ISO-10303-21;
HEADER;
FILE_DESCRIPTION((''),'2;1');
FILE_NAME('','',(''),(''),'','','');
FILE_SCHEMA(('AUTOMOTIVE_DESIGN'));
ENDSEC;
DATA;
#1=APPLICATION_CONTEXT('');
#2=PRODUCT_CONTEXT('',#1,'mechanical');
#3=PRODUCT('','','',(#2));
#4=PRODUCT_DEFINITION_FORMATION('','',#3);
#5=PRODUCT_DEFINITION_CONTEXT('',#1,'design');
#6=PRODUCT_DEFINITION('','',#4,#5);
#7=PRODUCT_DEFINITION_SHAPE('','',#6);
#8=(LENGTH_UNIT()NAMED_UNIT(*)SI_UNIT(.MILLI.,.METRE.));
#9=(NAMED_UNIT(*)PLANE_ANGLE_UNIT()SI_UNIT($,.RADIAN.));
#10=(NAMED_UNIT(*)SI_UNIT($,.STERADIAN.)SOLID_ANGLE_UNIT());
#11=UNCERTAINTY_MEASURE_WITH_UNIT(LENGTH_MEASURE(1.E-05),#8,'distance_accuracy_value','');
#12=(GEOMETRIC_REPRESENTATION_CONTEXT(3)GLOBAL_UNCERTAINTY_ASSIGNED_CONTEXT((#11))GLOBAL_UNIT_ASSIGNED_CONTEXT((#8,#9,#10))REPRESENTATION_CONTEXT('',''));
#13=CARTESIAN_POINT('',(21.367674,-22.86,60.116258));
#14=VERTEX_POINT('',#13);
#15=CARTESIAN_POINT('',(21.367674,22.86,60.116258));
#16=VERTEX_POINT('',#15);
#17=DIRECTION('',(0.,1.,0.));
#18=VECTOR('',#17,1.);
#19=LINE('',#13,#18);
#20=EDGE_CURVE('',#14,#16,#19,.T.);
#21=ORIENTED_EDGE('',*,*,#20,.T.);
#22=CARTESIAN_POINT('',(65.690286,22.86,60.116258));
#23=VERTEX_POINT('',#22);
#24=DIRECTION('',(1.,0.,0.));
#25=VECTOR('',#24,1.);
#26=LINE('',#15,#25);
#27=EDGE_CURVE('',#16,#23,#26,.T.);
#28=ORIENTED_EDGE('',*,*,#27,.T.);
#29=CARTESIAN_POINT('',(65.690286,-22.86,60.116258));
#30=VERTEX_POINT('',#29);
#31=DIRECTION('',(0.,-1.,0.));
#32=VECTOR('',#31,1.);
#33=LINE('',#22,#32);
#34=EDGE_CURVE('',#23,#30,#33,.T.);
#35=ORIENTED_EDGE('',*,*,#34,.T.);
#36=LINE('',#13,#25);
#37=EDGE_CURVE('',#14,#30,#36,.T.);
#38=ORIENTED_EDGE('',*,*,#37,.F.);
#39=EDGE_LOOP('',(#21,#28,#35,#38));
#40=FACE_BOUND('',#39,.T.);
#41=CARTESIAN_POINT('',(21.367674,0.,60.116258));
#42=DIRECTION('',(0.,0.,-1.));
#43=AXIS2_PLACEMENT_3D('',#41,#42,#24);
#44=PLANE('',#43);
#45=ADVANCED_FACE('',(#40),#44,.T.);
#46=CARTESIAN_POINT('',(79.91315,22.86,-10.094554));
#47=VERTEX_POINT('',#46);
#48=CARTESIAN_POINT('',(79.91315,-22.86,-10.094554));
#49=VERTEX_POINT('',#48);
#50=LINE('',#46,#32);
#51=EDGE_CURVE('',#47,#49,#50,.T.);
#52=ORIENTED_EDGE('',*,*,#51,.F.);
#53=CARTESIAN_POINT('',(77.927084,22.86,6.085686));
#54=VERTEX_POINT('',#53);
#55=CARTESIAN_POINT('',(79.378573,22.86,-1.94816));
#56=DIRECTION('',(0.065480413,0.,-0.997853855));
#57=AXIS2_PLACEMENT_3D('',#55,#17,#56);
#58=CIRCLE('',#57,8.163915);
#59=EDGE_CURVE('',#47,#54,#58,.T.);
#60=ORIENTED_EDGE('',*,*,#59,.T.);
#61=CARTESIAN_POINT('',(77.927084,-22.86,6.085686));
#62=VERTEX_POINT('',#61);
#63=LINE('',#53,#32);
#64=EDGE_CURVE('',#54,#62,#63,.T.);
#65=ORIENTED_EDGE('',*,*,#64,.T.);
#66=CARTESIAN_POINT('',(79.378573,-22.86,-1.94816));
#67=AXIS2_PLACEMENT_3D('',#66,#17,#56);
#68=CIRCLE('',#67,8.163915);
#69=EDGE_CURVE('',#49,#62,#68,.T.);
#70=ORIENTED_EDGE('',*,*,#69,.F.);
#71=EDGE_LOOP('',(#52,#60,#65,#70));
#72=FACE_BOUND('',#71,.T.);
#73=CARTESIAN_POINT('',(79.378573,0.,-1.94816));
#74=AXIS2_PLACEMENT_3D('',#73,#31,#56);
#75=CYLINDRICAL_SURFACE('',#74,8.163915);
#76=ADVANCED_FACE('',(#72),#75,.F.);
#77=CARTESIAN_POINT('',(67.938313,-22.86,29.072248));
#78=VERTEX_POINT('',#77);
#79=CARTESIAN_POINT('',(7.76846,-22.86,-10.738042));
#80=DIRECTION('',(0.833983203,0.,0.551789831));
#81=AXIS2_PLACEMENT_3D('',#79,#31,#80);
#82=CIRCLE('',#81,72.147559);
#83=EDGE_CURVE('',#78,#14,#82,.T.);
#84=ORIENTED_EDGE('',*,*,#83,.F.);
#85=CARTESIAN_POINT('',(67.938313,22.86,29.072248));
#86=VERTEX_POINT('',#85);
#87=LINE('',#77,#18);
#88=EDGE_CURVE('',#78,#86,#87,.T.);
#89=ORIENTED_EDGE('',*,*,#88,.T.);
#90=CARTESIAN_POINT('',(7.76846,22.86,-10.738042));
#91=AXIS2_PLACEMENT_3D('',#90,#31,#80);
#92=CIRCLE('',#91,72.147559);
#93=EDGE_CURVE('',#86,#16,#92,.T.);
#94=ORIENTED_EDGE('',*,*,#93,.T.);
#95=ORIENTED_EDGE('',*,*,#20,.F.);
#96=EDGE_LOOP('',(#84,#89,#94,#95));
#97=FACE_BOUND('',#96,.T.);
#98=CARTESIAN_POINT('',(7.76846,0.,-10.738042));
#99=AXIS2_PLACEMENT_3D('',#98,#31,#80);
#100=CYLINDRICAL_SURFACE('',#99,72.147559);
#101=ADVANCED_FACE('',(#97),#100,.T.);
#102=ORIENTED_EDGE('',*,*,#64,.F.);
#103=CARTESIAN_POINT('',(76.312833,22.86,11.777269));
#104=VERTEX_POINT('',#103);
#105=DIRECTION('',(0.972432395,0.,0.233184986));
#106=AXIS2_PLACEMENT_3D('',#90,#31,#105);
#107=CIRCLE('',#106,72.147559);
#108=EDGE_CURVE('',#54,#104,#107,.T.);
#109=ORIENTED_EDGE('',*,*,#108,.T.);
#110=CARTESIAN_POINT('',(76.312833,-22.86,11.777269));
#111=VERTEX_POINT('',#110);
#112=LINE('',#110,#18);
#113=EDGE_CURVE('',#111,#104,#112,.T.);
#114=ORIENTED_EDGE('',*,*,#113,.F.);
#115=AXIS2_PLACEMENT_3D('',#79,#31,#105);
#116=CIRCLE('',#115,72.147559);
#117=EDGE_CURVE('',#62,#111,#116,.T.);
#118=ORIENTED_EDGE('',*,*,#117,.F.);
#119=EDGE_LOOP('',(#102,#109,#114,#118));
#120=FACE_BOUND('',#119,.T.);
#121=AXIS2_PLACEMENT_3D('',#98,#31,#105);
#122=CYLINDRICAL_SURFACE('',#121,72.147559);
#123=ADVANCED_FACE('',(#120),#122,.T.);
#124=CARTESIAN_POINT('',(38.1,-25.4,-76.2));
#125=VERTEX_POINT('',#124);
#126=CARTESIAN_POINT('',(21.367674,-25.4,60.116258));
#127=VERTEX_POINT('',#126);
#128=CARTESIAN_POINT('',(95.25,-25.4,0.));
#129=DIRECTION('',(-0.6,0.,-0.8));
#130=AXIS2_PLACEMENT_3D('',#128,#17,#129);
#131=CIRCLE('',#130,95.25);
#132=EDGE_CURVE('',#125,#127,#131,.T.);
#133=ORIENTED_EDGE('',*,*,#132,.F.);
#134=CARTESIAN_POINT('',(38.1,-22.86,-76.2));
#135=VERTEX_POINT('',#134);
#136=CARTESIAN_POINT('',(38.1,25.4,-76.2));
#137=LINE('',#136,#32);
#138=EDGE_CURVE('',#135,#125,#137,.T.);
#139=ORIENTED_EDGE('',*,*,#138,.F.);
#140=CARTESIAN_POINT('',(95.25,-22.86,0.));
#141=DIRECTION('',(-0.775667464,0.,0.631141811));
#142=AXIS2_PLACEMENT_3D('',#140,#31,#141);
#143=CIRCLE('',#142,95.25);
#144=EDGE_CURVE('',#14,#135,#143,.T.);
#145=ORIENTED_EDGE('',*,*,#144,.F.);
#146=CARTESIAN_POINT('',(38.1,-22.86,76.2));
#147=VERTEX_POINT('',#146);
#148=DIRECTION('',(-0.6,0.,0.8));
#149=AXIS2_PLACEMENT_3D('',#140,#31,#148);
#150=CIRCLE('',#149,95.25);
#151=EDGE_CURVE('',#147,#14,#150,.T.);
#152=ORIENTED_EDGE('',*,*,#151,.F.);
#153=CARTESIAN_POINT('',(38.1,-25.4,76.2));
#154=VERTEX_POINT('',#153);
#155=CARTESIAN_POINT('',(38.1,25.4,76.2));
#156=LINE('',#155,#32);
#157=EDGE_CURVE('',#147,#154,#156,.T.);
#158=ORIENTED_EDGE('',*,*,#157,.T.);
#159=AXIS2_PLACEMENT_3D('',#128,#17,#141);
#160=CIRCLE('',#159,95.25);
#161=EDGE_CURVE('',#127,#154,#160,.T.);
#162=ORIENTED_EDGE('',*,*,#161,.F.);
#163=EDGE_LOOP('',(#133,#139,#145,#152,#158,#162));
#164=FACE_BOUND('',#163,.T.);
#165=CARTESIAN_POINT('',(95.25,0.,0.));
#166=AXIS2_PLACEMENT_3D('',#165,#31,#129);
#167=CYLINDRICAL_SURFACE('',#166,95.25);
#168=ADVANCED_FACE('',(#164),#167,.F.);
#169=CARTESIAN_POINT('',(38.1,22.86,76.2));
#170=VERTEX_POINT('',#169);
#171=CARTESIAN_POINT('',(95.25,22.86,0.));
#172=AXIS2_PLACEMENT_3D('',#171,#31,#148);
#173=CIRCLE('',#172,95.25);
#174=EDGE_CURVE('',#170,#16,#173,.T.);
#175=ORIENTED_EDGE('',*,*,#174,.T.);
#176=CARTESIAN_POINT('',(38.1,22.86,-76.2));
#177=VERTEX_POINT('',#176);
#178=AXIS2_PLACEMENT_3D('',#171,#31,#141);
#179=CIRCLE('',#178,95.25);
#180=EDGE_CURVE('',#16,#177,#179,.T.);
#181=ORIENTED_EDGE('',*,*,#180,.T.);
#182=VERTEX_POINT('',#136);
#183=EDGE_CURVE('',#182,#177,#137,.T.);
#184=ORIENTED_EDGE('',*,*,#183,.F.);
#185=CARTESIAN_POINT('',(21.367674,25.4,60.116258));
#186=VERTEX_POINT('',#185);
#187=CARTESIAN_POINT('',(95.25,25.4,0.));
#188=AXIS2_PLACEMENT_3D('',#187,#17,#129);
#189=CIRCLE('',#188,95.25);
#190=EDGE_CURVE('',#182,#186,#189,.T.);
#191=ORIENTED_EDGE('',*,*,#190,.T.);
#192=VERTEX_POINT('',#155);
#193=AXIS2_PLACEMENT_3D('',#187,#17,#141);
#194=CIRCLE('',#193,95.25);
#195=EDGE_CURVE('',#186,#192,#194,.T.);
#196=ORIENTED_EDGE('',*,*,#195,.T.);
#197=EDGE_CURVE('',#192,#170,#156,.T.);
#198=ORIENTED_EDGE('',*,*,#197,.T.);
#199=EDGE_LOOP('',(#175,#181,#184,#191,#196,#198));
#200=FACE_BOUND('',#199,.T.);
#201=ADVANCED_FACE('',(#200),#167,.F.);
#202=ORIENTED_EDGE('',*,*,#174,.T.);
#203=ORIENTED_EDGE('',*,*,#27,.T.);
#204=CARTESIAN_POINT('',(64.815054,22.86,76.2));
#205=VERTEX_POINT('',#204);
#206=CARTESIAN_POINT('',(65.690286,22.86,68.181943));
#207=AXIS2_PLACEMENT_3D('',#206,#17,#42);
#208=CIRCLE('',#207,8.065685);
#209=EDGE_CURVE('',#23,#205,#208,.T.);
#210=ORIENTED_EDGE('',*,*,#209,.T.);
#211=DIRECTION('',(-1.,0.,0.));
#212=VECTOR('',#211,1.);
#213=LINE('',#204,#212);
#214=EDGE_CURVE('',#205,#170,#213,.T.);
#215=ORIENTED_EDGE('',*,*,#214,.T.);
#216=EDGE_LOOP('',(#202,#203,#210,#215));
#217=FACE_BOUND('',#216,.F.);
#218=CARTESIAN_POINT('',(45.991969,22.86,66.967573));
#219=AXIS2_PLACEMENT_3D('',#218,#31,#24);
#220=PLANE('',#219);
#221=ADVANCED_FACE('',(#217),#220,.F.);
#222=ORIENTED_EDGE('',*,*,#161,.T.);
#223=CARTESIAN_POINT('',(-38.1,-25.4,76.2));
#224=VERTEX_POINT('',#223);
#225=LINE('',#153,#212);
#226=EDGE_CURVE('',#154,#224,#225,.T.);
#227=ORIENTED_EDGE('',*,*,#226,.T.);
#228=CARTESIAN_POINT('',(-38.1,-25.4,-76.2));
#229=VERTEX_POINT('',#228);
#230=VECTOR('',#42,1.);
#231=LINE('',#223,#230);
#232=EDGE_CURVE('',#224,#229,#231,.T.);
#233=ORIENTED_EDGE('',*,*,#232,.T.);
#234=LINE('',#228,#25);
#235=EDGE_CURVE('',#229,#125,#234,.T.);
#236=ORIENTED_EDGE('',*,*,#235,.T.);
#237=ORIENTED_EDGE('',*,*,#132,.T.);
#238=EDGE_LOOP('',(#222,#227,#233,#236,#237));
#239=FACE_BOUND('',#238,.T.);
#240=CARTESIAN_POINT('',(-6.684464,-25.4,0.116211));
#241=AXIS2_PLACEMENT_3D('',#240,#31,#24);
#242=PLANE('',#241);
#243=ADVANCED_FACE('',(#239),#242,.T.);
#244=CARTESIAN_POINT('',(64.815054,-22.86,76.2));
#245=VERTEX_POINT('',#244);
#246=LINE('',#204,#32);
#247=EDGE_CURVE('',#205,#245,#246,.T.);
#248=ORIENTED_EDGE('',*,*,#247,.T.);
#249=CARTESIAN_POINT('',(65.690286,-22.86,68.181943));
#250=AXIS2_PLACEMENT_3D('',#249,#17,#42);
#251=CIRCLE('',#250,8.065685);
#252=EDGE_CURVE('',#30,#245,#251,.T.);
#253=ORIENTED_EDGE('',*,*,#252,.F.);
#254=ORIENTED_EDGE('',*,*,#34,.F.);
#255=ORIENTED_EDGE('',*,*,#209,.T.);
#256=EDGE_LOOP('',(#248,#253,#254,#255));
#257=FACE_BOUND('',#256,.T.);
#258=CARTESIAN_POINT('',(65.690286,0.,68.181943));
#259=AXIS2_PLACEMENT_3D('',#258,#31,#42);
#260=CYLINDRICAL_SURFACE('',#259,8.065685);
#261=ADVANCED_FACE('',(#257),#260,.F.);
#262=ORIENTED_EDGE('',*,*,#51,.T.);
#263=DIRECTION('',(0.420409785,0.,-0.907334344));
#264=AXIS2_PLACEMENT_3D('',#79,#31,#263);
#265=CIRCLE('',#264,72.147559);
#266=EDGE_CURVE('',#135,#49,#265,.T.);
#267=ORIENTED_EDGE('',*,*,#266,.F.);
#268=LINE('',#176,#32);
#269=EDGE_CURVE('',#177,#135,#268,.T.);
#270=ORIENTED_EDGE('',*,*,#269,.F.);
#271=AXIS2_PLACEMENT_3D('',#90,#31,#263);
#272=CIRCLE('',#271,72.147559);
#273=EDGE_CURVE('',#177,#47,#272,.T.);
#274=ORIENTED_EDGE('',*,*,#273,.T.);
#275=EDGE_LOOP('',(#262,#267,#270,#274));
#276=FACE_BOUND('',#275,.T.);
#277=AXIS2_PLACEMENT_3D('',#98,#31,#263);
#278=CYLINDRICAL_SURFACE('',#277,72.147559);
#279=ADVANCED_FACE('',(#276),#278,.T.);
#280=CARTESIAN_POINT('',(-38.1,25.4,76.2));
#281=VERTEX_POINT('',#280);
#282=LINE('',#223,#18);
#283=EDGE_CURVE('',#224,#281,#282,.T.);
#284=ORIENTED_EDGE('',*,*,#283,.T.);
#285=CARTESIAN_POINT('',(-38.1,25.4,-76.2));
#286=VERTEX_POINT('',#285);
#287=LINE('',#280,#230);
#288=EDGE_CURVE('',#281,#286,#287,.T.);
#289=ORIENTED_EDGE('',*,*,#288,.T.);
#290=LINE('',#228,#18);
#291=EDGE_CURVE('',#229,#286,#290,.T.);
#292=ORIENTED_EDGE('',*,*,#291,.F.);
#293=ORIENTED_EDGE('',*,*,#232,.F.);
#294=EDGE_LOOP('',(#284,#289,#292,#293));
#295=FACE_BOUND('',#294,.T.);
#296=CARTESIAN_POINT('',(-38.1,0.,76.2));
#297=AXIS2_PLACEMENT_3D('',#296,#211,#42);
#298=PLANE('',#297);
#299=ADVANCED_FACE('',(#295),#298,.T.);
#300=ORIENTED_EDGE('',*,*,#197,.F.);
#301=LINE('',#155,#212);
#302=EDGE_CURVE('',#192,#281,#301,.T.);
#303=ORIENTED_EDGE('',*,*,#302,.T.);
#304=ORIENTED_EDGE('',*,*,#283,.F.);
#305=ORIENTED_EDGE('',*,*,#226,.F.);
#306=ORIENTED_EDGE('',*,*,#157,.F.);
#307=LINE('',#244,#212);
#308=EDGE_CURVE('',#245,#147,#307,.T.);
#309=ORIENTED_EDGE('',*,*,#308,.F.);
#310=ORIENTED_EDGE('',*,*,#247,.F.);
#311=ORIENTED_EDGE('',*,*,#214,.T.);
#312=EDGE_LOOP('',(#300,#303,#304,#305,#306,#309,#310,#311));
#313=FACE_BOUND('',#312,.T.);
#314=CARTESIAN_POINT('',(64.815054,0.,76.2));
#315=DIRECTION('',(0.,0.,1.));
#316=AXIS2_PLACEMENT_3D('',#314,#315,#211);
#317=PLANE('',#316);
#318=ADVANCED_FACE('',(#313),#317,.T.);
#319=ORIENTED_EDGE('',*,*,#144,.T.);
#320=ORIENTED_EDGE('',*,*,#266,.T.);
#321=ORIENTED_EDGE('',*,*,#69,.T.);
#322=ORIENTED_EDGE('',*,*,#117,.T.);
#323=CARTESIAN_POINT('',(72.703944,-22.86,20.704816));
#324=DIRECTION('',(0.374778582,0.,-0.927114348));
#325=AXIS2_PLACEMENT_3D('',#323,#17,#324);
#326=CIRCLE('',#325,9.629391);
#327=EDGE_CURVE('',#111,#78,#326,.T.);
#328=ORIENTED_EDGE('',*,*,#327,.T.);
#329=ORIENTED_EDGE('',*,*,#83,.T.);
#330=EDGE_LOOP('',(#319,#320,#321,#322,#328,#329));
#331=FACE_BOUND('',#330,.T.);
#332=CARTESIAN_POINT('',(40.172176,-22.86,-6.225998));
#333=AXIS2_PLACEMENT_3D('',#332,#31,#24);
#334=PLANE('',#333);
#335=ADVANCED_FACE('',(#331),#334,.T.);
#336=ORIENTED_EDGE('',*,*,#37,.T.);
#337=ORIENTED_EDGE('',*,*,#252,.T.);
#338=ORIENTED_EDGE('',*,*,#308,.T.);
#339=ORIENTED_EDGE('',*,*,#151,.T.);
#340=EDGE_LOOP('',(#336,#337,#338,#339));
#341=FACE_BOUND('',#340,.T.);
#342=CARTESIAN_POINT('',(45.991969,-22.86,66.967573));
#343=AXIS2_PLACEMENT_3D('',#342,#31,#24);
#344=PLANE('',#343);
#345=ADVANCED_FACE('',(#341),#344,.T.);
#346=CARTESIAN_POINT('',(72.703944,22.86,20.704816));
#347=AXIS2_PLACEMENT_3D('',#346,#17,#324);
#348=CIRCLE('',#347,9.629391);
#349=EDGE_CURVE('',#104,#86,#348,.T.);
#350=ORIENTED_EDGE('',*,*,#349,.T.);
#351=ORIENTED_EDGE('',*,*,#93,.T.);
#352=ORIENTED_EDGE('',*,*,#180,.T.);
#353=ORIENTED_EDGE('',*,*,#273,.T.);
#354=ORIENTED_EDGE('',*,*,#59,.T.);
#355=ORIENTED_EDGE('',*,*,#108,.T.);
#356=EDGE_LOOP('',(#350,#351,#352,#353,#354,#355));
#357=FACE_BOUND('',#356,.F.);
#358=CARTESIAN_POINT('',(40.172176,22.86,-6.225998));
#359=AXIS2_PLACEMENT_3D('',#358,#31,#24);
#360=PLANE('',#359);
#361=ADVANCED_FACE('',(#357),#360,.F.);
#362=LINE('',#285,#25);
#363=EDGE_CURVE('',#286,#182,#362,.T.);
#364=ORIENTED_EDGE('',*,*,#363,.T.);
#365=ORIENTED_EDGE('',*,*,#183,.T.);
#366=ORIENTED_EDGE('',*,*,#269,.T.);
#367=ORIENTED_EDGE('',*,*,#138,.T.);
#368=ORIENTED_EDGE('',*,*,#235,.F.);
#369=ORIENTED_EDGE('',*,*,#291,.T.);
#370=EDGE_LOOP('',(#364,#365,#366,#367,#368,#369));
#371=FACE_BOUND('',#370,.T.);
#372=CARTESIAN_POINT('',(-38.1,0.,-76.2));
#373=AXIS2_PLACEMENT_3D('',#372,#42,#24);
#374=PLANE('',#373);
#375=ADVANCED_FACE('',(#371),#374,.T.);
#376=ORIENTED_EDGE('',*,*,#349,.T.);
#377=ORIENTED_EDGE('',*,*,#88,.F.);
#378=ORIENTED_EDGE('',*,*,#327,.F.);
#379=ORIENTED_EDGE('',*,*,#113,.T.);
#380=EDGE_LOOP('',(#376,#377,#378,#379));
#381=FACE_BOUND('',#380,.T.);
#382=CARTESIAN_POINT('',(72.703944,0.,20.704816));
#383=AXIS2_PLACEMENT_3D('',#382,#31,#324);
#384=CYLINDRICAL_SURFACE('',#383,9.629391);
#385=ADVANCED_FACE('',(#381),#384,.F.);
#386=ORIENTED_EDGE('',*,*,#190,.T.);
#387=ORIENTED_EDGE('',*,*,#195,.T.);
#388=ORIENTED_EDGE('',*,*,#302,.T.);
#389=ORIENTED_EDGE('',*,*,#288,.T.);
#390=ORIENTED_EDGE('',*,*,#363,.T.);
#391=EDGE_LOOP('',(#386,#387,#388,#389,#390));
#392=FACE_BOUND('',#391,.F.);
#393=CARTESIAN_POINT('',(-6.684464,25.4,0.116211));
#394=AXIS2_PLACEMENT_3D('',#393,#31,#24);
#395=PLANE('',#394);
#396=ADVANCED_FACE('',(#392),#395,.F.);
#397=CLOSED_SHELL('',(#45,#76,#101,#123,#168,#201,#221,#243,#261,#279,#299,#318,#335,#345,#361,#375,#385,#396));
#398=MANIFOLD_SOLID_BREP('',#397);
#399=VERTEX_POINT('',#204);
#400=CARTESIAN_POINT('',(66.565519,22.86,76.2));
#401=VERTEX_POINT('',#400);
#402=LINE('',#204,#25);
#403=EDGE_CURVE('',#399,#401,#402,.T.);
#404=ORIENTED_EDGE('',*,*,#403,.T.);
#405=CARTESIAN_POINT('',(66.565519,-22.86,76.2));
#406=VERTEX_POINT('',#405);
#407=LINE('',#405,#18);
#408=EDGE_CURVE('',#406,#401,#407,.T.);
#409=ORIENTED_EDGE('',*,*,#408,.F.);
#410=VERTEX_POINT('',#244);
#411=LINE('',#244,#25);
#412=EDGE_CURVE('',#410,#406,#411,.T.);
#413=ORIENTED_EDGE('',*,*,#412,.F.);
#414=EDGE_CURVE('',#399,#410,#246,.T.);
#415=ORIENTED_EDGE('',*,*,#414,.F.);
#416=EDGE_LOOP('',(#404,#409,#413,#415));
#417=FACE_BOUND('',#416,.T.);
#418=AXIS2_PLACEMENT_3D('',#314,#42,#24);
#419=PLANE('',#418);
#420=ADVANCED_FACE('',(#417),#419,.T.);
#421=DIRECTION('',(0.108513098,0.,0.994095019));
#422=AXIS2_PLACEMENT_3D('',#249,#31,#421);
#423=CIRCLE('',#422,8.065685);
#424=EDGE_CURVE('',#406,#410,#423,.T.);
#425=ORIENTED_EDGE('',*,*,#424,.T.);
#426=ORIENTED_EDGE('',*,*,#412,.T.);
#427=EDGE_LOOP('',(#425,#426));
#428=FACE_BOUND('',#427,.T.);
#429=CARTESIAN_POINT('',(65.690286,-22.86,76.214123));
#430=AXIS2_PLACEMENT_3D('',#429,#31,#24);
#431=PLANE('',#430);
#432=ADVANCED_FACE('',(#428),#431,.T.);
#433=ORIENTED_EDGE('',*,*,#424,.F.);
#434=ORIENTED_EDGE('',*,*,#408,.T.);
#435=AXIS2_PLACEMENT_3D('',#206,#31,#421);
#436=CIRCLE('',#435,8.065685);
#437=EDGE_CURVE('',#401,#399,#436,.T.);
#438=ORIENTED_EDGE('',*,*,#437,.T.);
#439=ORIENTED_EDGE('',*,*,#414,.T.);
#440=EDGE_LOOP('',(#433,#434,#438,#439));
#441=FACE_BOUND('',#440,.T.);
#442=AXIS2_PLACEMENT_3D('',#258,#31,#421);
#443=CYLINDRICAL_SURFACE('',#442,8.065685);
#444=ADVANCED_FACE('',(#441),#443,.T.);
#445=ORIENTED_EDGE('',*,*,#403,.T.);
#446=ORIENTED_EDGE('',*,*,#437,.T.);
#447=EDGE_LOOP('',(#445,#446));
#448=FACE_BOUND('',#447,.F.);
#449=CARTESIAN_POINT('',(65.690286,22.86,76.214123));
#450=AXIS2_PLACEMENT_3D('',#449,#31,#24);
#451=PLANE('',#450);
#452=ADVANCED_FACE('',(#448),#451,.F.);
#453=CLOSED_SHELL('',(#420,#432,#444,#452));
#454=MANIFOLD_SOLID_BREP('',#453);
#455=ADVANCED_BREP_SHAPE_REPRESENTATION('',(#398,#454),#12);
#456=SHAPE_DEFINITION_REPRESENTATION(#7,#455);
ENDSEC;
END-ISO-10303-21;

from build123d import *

# Parameters (mm, degrees)
F1_DEPTH = 25.4
F2_DEPTH = 22.86


with BuildPart() as f1:
    # F0 (on Front) → F1 (new body, symmetric)
    with BuildSketch(Plane.XZ):
        with BuildLine():
            Line((-38.1, -76.2), (38.1, -76.2))
            ThreePointArc((38.1, -76.2), (0.709542394, -11.6044980782), (21.3676740894, 60.1162575185))
            ThreePointArc((21.3676740894, 60.1162575185), (29.2421269738, 68.6696672379), (38.1, 76.2))
            Line((38.1, 76.2), (17.5172466843, 76.2))
            Line((17.5172466843, 76.2), (-38.1, 76.2))
            Line((-38.1, 76.2), (-38.1, -76.2))
        make_face()
    extrude(amount=F1_DEPTH, both=True)



with BuildPart() as f2:
    # F0 (on Front) → F2 (new body, symmetric)
    with BuildSketch(Plane.XZ):
        with BuildLine():
            ThreePointArc((66.565518939, 76.2), (65.6902864575, 76.2476277146), (64.8150539761, 76.2))
            Line((64.8150539761, 76.2), (66.565518939, 76.2))
        make_face()
    extrude(amount=F2_DEPTH, both=True)


with BuildPart() as f1_1:
    add(f1.part)

    add(f2.part)  # F2#2 merges F2
    # F0 (on Front) → F2, piece 2 (join, symmetric)
    with BuildSketch(Plane.XZ):
        with BuildLine():
            ThreePointArc((38.1, 76.2), (29.2421269738, 68.6696672379), (21.3676740894, 60.1162575185))
            Line((21.3676740894, 60.1162575185), (65.6902864575, 60.1162575185))
            ThreePointArc((65.6902864575, 60.1162575185), (57.6365170899, 67.7436789129), (64.8150539761, 76.2))
            Line((64.8150539761, 76.2), (38.1, 76.2))
        make_face()
        with BuildLine():
            ThreePointArc((21.3676740894, 60.1162575185), (0.709542394, -11.6044980782), (38.1, -76.2))
            ThreePointArc((38.1, -76.2), (68.7424455832, -49.3054294639), (79.9131497153, -10.0945538702))
            ThreePointArc((79.9131497153, -10.0945538702), (71.275473587, -2.9427861122), (77.9270839804, 6.0856860805))
            ThreePointArc((77.9270839804, 6.0856860805), (77.1783216459, 8.9480305918), (76.3128333068, 11.7772691943))
            ThreePointArc((76.3128333068, 11.7772691943), (64.037134436, 16.508200152), (67.9383126947, 29.0722480144))
            ThreePointArc((67.9383126947, 29.0722480144), (47.785974111, 49.2941905371), (21.3676740894, 60.1162575185))
        make_face()
    extrude(amount=F2_DEPTH, both=True)


solid = f1_1.part
